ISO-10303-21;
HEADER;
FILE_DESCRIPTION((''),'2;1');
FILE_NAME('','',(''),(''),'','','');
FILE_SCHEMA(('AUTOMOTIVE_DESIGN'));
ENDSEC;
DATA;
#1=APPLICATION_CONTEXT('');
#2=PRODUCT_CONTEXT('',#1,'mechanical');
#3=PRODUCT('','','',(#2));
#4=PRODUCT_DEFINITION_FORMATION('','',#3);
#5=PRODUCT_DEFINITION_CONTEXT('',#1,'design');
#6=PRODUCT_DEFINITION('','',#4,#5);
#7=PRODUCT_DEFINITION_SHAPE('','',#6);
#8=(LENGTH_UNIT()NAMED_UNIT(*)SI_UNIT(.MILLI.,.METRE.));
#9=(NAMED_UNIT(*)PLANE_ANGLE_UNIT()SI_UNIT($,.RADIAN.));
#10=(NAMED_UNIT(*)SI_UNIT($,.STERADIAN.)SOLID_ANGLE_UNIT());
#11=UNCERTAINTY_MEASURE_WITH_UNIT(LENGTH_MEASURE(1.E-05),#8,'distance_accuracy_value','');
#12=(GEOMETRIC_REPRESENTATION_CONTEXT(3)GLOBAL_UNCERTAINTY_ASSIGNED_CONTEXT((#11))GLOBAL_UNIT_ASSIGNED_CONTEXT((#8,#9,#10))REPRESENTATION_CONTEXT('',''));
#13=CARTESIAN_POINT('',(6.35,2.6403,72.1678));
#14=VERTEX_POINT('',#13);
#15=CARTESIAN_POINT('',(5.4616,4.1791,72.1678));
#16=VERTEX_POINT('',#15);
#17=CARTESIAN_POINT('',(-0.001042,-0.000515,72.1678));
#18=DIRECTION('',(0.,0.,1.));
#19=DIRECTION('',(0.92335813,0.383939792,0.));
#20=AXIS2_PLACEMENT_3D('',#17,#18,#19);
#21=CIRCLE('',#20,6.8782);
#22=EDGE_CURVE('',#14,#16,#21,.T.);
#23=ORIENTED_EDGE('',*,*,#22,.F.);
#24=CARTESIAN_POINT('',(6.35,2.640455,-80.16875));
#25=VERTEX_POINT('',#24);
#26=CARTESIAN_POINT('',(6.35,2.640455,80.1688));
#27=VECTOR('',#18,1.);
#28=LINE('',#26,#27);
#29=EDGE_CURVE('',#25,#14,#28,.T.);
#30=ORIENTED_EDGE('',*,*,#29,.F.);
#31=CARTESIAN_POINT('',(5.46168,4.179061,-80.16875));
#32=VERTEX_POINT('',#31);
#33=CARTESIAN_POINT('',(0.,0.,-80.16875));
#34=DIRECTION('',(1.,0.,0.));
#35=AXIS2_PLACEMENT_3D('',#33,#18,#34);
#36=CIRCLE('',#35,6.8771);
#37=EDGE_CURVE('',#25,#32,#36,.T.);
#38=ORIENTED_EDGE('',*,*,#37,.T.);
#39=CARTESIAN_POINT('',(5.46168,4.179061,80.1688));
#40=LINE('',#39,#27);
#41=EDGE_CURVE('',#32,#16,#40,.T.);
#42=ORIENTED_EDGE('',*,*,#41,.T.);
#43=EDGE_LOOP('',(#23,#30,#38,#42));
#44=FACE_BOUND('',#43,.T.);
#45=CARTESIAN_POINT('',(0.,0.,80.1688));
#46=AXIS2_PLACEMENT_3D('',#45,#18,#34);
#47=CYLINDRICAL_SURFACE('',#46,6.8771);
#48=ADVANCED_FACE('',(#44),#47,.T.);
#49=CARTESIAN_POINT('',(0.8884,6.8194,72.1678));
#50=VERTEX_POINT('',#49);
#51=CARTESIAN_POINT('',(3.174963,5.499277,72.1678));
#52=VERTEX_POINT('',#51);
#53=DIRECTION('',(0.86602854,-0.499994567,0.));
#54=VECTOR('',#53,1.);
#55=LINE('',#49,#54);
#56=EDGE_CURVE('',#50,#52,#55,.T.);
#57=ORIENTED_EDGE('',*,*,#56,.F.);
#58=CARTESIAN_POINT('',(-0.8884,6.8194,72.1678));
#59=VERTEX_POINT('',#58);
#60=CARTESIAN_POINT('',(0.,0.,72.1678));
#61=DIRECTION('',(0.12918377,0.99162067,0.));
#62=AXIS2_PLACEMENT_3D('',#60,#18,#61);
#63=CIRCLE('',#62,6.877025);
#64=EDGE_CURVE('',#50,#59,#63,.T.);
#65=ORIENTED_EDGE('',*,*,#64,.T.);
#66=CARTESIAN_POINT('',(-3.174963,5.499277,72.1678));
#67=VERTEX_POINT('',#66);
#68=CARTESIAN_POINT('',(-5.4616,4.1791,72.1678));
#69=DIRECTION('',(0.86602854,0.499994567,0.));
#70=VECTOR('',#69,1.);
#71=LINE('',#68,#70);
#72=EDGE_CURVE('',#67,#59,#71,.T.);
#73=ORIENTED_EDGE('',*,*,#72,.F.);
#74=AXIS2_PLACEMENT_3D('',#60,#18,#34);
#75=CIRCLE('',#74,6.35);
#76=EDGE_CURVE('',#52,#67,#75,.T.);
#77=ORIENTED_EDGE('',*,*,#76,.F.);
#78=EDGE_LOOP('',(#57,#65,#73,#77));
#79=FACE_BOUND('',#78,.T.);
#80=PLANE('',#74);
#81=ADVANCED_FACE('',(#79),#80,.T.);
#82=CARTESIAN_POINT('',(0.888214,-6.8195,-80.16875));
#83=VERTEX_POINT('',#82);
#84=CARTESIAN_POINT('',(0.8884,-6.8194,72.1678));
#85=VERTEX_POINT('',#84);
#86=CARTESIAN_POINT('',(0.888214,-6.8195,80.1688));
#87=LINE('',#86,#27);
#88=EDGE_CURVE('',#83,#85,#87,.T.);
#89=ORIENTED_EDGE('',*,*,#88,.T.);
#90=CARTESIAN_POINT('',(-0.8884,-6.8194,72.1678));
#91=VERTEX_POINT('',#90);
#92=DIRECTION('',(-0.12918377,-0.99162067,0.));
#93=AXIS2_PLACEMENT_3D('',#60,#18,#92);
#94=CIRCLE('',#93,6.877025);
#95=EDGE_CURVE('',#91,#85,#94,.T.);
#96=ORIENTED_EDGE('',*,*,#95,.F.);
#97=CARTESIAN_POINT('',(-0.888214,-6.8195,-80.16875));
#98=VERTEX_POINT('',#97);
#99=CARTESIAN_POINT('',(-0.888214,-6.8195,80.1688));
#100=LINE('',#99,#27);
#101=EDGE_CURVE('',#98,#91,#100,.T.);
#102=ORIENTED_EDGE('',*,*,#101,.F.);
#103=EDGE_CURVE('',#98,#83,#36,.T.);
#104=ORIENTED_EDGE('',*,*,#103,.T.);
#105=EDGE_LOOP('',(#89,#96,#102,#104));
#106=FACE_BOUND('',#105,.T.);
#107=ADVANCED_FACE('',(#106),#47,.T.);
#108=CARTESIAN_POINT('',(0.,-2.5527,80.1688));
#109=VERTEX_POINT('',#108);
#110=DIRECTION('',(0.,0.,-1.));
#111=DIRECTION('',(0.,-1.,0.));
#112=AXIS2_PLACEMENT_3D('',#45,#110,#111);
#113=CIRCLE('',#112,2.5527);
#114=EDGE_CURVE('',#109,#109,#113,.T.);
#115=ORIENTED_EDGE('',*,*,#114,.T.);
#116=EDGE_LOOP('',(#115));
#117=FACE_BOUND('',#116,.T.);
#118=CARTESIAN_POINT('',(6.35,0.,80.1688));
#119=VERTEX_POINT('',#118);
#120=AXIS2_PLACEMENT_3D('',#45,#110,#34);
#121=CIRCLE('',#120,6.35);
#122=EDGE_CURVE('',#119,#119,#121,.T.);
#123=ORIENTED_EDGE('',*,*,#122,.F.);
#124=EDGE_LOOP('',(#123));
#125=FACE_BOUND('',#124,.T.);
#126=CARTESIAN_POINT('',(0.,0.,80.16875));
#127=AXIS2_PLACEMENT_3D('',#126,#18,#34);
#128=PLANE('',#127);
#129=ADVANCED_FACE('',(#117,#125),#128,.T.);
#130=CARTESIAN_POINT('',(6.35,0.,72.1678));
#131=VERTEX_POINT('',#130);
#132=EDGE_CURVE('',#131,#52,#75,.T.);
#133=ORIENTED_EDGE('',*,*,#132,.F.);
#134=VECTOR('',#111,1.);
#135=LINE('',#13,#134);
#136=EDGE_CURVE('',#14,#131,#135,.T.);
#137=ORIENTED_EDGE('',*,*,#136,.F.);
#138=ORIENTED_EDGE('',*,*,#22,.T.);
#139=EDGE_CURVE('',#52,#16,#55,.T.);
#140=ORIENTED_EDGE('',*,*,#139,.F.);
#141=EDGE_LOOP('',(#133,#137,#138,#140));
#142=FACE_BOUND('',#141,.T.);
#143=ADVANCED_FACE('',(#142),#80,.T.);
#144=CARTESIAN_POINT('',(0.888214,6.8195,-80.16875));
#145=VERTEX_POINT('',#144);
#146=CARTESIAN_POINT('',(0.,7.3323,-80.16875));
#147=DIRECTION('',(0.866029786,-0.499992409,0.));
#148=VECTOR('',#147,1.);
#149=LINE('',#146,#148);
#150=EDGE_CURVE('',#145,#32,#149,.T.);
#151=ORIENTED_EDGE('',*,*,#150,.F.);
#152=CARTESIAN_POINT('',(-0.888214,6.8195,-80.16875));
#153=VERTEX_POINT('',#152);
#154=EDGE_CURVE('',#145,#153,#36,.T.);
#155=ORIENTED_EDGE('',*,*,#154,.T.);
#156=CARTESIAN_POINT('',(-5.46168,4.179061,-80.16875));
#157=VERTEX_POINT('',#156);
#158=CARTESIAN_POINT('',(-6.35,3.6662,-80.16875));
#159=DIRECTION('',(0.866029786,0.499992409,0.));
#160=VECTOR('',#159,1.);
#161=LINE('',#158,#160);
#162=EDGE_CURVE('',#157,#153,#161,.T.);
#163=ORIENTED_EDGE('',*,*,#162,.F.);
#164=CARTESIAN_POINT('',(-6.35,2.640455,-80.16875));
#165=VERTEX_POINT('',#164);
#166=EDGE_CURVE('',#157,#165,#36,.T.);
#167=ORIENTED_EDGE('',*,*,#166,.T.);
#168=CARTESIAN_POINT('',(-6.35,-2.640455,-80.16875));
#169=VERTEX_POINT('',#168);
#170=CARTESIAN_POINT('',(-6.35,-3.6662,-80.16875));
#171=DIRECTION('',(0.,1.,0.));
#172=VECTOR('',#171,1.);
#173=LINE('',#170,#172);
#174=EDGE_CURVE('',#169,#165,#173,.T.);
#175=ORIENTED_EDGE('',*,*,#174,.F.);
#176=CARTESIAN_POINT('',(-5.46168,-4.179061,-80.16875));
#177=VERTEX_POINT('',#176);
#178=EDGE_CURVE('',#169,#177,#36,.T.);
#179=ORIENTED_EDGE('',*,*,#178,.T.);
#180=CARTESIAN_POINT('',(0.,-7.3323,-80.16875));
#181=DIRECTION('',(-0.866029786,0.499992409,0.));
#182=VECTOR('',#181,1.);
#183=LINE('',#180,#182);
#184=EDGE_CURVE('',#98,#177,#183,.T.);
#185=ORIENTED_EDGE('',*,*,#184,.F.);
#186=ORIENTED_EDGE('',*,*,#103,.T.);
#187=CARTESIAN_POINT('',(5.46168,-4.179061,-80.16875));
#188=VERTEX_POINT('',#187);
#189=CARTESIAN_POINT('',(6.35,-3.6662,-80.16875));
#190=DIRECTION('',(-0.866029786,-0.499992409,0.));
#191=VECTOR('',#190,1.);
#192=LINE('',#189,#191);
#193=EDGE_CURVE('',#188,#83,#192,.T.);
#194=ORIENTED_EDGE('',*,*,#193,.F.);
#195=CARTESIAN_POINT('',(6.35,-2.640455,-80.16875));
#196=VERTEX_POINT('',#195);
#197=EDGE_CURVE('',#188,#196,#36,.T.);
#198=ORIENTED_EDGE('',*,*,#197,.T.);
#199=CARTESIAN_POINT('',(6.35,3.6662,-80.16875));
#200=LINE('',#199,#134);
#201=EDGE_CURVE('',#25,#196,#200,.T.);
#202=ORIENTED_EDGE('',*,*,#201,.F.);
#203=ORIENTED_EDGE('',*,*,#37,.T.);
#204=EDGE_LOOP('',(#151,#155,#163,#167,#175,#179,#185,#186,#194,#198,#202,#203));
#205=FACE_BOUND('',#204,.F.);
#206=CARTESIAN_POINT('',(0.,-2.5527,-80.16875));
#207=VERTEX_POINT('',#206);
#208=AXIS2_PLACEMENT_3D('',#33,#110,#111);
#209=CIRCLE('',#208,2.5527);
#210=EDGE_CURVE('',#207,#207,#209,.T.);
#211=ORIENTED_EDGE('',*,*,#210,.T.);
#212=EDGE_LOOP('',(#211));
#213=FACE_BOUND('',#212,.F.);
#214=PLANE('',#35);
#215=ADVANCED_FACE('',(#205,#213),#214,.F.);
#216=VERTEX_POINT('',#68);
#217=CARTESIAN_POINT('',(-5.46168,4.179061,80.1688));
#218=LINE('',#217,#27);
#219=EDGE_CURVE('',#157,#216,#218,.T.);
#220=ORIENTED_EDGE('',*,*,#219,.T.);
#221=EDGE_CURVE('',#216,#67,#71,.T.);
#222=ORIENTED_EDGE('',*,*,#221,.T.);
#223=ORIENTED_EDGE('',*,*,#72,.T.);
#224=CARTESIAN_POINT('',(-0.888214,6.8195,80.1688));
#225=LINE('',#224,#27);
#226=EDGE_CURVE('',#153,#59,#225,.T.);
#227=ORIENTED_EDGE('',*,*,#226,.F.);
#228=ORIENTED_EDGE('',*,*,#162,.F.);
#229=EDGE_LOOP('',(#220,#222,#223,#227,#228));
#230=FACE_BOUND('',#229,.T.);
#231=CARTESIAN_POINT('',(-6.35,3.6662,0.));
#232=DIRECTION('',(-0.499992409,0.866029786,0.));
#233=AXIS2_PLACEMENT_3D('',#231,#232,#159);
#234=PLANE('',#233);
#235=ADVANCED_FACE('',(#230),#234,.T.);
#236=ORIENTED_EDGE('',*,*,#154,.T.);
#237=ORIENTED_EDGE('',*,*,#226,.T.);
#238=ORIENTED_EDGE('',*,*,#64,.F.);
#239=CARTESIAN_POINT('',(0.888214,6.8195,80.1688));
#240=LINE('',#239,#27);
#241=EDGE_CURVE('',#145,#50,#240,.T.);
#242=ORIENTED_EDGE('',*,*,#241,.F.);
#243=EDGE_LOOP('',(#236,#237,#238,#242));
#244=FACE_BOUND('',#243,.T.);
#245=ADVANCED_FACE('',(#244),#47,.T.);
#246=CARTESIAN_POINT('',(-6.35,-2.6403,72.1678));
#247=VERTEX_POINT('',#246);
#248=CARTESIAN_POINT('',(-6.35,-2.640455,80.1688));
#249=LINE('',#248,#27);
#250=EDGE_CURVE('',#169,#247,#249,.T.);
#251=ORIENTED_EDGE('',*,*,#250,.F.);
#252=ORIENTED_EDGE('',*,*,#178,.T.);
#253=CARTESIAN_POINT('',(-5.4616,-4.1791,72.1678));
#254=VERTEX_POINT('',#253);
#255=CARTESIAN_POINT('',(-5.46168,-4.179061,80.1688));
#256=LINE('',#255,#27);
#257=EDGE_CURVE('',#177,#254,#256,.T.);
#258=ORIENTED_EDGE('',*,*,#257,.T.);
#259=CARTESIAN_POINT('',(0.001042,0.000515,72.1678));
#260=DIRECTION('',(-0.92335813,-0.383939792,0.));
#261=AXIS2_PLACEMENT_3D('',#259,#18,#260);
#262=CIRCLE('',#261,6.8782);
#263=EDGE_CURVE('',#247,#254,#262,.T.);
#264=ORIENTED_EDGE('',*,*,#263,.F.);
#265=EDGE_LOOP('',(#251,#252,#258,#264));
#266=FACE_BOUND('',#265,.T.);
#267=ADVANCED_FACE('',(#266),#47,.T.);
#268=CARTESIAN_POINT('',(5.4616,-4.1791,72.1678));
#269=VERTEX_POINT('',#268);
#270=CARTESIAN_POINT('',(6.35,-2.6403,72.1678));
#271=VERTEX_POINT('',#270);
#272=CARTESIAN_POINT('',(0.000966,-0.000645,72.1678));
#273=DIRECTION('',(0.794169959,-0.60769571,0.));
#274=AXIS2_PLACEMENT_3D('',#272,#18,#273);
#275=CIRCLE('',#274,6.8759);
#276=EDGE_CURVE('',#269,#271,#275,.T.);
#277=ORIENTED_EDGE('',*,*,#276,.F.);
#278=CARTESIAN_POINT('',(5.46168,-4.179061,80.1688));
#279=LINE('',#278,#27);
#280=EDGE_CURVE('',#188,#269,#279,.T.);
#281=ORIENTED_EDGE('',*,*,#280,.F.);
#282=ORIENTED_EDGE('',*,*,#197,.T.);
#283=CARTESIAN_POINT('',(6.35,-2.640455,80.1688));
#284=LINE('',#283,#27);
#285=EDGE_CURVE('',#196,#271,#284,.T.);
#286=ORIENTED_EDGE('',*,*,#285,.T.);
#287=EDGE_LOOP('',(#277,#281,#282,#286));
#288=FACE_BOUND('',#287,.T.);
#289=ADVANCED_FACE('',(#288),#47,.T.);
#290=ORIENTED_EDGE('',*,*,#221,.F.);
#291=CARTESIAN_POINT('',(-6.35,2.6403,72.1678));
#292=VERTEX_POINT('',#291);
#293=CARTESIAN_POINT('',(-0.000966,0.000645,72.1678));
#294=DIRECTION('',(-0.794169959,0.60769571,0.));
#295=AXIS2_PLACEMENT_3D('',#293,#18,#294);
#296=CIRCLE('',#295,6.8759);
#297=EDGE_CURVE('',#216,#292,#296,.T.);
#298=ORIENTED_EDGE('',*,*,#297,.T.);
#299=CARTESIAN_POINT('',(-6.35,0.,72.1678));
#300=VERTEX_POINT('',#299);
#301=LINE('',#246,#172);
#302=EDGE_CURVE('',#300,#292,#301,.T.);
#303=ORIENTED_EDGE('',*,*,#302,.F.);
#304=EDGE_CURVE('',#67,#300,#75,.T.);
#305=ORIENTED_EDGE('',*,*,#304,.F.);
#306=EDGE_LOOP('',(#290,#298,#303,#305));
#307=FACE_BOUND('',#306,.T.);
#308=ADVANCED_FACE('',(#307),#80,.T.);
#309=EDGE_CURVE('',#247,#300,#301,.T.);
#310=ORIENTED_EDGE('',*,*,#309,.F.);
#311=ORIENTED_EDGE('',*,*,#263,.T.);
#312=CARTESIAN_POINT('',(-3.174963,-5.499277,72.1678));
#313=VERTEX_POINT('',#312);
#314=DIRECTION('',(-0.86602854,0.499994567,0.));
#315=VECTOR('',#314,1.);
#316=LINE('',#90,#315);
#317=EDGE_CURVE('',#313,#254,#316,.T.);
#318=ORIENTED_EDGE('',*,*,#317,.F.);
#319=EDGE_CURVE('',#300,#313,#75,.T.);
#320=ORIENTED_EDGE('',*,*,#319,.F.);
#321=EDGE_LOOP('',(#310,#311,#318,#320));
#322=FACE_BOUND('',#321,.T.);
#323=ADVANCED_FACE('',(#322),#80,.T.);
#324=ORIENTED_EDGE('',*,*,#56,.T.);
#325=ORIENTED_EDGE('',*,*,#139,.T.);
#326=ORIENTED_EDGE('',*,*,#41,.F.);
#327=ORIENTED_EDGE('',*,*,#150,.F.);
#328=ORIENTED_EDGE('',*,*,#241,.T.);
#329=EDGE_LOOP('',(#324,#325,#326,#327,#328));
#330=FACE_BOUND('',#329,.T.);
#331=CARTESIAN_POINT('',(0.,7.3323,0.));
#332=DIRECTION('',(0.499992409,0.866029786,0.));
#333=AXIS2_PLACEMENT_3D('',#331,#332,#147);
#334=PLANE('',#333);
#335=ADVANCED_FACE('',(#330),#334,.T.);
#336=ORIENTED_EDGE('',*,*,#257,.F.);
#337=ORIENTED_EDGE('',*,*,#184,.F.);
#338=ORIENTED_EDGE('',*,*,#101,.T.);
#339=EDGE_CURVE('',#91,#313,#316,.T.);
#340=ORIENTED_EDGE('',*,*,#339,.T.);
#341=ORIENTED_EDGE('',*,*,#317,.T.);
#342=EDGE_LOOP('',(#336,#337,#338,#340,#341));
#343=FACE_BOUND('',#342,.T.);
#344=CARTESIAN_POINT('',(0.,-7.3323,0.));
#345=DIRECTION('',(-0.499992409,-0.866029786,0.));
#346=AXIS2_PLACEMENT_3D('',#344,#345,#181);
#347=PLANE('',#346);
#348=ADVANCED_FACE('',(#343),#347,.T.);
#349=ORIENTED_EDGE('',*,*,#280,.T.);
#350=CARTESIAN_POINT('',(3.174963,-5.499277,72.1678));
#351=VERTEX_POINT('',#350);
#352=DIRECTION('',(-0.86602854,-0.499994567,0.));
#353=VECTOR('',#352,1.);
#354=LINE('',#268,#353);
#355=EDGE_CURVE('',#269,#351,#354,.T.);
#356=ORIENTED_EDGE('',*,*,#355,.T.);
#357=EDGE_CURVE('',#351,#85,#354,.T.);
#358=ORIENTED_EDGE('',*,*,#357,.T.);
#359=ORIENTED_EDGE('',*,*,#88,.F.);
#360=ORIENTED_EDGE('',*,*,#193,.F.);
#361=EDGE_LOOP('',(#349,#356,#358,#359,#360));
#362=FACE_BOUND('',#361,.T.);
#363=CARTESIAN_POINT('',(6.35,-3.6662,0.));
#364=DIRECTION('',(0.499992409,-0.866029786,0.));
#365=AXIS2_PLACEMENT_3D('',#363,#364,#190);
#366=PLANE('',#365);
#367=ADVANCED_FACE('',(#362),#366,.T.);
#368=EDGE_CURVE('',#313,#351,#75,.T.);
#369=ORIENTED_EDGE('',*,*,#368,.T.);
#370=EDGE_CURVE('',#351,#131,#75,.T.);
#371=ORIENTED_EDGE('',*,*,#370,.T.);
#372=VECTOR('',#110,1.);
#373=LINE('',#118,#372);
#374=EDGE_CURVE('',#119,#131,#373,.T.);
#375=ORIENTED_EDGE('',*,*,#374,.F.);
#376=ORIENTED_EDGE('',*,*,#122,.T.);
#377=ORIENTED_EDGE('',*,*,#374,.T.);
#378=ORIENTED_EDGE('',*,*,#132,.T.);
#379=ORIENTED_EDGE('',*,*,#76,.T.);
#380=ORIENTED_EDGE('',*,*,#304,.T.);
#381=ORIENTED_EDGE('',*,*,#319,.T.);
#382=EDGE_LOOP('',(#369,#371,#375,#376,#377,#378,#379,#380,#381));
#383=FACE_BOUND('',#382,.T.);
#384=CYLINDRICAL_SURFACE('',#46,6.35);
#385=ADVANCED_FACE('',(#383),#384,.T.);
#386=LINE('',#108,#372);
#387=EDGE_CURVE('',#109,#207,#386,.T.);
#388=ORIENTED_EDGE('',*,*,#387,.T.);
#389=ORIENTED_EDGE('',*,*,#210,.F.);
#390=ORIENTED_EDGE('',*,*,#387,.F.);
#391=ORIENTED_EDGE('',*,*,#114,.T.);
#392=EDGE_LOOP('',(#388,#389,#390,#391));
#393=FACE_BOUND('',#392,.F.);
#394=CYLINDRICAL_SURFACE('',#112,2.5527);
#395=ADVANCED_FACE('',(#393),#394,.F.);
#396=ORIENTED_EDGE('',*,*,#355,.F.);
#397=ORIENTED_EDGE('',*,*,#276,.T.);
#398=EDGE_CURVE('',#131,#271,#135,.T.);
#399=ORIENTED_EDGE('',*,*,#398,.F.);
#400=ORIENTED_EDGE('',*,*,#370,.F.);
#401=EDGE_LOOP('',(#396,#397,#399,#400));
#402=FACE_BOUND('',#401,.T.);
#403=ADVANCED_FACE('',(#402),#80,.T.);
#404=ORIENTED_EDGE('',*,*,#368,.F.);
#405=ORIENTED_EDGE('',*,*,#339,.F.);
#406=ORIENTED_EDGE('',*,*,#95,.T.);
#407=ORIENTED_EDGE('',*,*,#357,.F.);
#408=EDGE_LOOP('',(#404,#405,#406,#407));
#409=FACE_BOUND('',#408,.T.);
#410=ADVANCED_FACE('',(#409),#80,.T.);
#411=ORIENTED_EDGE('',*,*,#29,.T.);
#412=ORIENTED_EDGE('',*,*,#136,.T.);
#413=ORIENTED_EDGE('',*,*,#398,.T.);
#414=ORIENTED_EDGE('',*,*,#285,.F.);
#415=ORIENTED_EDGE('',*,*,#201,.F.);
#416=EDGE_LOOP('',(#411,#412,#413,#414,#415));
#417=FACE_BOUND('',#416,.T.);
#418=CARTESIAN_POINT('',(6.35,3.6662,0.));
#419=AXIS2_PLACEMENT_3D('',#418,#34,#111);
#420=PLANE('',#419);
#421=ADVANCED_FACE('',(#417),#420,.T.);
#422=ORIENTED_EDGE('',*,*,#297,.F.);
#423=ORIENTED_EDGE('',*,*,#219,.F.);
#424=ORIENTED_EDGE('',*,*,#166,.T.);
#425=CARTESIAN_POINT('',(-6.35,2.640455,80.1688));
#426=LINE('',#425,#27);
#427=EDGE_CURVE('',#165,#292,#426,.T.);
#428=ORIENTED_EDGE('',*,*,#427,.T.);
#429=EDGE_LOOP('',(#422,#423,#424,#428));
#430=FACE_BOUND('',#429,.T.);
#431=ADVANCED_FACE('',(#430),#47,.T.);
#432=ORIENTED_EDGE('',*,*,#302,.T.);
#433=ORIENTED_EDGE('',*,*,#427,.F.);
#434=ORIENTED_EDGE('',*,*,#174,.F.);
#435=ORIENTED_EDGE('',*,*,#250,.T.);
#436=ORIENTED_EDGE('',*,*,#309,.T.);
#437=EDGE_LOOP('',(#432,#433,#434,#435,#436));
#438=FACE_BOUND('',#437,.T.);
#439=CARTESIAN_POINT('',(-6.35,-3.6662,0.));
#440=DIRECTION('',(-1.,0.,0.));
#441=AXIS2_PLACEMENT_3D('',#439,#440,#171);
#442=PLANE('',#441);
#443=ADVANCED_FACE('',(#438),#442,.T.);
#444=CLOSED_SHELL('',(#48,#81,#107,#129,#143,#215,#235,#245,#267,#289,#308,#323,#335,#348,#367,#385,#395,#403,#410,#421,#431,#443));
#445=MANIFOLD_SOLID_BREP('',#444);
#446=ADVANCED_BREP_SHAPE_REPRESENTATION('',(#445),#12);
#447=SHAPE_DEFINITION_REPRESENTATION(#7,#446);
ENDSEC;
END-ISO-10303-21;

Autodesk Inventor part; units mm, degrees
ref_plane "YZ Plane" through (0, 0, 0) normal (1, 0, 0) x (0, 1, 0)
ref_plane "XZ Plane" through (0, 0, 0) normal (0, 1, 0) x (-1, 0, 0)
ref_plane "XY Plane" through (0, 0, 0) normal (0, 0, 1) x (1, 0, 0)
sketch "Sketch1" plane through (0, 0, 0) normal (0, 0, 1) x (1, 0, 0)
  line L0 (-6.35, -3.6662) -> (-6.35, 3.6662)
  line L1 (-6.35, 3.6662) -> (0, 7.3323)
  line L2 (0, 7.3323) -> (6.35, 3.6662)
  line L3 (6.35, 3.6662) -> (6.35, -3.6662)
  line L4 (6.35, -3.6662) -> (0, -7.3323)
  line L5 (0, -7.3323) -> (-6.35, -3.6662)
  point P0 (0, 0)
  point P1 (0, 0)
  dimension "Size" = 12.7
extrude "Extrusion1" add sketch "Sketch1" along normal mid plane 160.3375
sketch "Sketch3" plane through (0, 0, 80.1688) normal (0, 0, 1) x (1, 0, 0)
  line L0 (-6.35, 3.6662) -> (0, 7.3323) construction
  line L1 (0, 7.3323) -> (6.35, 3.6662) construction
  line L2 (6.35, 3.6662) -> (6.35, -3.6662) construction
  line L3 (6.35, -3.6662) -> (0, -7.3323) construction
  line L4 (0, -7.3323) -> (-6.35, -3.6662) construction
  line L5 (-6.35, -3.6662) -> (-6.35, 3.6662) construction
  point P0 (0, 0)
hole "Hole1" at (0, 0, 80.1688) direction (0, 0, -1) diameter 5.1054 end through all
sketch "Sketch4" plane through (0, 0, 80.1688) normal (0, 0, 1) x (1, 0, 0)
  circle A0 centre (0, 0) radius 2.5527 construction
  line L0 (-6.35, 3.6662) -> (0, 7.3323) construction
  line L1 (0, 7.3323) -> (6.35, 3.6662) construction
  line L2 (6.35, 3.6662) -> (6.35, -3.6662) construction
  line L3 (6.35, -3.6662) -> (0, -7.3323) construction
  line L4 (0, -7.3323) -> (-6.35, -3.6662) construction
  line L5 (-6.35, -3.6662) -> (-6.35, 3.6662) construction
  circle A1 centre (0, 0) radius 6.8771
  circle A2 centre (0, 0) radius 8.89
  dimension "thunder" = 13.7541
  dimension "d16" = 17.78
extrude "Extrusion3" cut sketch "Sketch4" against normal through all
sketch "Sketch5" plane through (0, 0, 80.1688) normal (0, 0, 1) x (1, 0, 0)
  arc A0 (5.4616, -4.1791) -> (6.35, -2.6403) centre (0, 0) ccw projected
  line L0 (5.4616, -4.1791) -> (0.8884, -6.8194) projected
  arc A1 (-0.8884, -6.8194) -> (0.8884, -6.8194) centre (0, 0) ccw projected
  line L1 (-0.8884, -6.8194) -> (-5.4616, -4.1791) projected
  arc A2 (-6.35, -2.6403) -> (-5.4616, -4.1791) centre (0, 0) ccw projected
  line L2 (-6.35, -2.6403) -> (-6.35, 2.6403) projected
  arc A3 (-5.4616, 4.1791) -> (-6.35, 2.6403) centre (0, 0) ccw projected
  line L3 (-5.4616, 4.1791) -> (-0.8884, 6.8194) projected
  arc A4 (0.8884, 6.8194) -> (-0.8884, 6.8194) centre (0, 0) ccw projected
  line L4 (0.8884, 6.8194) -> (5.4616, 4.1791) projected
  arc A5 (6.35, 2.6403) -> (5.4616, 4.1791) centre (0, 0) ccw projected
  line L5 (6.35, 2.6403) -> (6.35, -2.6403) projected
  circle A6 centre (0, 0) radius 2.5527 projected
  circle A7 centre (0, 0) radius 6.35
  point P0 (-3.175, 5.4993)
  point P1 (3.175, 5.4993)
  point P2 (6.35, 0)
  point P3 (-6.35, 0)
  point P4 (-3.175, -5.4993)
  point P5 (3.175, -5.4993)
  dimension "d19" = 12.7
extrude "Extrusion4" cut sketch "Sketch5" against normal blind 8.001 contours L0 A7 L5 A0 | L0 A1 L1 A7 | A7 L4 A5 L5 | L1 A2 L2 A7 | A7 L3 A4 L4 | L2 A3 L3 A7
equation "\"bearing\" = 25.4"
properties part number "CL4-020" material "Aluminum 6061"
